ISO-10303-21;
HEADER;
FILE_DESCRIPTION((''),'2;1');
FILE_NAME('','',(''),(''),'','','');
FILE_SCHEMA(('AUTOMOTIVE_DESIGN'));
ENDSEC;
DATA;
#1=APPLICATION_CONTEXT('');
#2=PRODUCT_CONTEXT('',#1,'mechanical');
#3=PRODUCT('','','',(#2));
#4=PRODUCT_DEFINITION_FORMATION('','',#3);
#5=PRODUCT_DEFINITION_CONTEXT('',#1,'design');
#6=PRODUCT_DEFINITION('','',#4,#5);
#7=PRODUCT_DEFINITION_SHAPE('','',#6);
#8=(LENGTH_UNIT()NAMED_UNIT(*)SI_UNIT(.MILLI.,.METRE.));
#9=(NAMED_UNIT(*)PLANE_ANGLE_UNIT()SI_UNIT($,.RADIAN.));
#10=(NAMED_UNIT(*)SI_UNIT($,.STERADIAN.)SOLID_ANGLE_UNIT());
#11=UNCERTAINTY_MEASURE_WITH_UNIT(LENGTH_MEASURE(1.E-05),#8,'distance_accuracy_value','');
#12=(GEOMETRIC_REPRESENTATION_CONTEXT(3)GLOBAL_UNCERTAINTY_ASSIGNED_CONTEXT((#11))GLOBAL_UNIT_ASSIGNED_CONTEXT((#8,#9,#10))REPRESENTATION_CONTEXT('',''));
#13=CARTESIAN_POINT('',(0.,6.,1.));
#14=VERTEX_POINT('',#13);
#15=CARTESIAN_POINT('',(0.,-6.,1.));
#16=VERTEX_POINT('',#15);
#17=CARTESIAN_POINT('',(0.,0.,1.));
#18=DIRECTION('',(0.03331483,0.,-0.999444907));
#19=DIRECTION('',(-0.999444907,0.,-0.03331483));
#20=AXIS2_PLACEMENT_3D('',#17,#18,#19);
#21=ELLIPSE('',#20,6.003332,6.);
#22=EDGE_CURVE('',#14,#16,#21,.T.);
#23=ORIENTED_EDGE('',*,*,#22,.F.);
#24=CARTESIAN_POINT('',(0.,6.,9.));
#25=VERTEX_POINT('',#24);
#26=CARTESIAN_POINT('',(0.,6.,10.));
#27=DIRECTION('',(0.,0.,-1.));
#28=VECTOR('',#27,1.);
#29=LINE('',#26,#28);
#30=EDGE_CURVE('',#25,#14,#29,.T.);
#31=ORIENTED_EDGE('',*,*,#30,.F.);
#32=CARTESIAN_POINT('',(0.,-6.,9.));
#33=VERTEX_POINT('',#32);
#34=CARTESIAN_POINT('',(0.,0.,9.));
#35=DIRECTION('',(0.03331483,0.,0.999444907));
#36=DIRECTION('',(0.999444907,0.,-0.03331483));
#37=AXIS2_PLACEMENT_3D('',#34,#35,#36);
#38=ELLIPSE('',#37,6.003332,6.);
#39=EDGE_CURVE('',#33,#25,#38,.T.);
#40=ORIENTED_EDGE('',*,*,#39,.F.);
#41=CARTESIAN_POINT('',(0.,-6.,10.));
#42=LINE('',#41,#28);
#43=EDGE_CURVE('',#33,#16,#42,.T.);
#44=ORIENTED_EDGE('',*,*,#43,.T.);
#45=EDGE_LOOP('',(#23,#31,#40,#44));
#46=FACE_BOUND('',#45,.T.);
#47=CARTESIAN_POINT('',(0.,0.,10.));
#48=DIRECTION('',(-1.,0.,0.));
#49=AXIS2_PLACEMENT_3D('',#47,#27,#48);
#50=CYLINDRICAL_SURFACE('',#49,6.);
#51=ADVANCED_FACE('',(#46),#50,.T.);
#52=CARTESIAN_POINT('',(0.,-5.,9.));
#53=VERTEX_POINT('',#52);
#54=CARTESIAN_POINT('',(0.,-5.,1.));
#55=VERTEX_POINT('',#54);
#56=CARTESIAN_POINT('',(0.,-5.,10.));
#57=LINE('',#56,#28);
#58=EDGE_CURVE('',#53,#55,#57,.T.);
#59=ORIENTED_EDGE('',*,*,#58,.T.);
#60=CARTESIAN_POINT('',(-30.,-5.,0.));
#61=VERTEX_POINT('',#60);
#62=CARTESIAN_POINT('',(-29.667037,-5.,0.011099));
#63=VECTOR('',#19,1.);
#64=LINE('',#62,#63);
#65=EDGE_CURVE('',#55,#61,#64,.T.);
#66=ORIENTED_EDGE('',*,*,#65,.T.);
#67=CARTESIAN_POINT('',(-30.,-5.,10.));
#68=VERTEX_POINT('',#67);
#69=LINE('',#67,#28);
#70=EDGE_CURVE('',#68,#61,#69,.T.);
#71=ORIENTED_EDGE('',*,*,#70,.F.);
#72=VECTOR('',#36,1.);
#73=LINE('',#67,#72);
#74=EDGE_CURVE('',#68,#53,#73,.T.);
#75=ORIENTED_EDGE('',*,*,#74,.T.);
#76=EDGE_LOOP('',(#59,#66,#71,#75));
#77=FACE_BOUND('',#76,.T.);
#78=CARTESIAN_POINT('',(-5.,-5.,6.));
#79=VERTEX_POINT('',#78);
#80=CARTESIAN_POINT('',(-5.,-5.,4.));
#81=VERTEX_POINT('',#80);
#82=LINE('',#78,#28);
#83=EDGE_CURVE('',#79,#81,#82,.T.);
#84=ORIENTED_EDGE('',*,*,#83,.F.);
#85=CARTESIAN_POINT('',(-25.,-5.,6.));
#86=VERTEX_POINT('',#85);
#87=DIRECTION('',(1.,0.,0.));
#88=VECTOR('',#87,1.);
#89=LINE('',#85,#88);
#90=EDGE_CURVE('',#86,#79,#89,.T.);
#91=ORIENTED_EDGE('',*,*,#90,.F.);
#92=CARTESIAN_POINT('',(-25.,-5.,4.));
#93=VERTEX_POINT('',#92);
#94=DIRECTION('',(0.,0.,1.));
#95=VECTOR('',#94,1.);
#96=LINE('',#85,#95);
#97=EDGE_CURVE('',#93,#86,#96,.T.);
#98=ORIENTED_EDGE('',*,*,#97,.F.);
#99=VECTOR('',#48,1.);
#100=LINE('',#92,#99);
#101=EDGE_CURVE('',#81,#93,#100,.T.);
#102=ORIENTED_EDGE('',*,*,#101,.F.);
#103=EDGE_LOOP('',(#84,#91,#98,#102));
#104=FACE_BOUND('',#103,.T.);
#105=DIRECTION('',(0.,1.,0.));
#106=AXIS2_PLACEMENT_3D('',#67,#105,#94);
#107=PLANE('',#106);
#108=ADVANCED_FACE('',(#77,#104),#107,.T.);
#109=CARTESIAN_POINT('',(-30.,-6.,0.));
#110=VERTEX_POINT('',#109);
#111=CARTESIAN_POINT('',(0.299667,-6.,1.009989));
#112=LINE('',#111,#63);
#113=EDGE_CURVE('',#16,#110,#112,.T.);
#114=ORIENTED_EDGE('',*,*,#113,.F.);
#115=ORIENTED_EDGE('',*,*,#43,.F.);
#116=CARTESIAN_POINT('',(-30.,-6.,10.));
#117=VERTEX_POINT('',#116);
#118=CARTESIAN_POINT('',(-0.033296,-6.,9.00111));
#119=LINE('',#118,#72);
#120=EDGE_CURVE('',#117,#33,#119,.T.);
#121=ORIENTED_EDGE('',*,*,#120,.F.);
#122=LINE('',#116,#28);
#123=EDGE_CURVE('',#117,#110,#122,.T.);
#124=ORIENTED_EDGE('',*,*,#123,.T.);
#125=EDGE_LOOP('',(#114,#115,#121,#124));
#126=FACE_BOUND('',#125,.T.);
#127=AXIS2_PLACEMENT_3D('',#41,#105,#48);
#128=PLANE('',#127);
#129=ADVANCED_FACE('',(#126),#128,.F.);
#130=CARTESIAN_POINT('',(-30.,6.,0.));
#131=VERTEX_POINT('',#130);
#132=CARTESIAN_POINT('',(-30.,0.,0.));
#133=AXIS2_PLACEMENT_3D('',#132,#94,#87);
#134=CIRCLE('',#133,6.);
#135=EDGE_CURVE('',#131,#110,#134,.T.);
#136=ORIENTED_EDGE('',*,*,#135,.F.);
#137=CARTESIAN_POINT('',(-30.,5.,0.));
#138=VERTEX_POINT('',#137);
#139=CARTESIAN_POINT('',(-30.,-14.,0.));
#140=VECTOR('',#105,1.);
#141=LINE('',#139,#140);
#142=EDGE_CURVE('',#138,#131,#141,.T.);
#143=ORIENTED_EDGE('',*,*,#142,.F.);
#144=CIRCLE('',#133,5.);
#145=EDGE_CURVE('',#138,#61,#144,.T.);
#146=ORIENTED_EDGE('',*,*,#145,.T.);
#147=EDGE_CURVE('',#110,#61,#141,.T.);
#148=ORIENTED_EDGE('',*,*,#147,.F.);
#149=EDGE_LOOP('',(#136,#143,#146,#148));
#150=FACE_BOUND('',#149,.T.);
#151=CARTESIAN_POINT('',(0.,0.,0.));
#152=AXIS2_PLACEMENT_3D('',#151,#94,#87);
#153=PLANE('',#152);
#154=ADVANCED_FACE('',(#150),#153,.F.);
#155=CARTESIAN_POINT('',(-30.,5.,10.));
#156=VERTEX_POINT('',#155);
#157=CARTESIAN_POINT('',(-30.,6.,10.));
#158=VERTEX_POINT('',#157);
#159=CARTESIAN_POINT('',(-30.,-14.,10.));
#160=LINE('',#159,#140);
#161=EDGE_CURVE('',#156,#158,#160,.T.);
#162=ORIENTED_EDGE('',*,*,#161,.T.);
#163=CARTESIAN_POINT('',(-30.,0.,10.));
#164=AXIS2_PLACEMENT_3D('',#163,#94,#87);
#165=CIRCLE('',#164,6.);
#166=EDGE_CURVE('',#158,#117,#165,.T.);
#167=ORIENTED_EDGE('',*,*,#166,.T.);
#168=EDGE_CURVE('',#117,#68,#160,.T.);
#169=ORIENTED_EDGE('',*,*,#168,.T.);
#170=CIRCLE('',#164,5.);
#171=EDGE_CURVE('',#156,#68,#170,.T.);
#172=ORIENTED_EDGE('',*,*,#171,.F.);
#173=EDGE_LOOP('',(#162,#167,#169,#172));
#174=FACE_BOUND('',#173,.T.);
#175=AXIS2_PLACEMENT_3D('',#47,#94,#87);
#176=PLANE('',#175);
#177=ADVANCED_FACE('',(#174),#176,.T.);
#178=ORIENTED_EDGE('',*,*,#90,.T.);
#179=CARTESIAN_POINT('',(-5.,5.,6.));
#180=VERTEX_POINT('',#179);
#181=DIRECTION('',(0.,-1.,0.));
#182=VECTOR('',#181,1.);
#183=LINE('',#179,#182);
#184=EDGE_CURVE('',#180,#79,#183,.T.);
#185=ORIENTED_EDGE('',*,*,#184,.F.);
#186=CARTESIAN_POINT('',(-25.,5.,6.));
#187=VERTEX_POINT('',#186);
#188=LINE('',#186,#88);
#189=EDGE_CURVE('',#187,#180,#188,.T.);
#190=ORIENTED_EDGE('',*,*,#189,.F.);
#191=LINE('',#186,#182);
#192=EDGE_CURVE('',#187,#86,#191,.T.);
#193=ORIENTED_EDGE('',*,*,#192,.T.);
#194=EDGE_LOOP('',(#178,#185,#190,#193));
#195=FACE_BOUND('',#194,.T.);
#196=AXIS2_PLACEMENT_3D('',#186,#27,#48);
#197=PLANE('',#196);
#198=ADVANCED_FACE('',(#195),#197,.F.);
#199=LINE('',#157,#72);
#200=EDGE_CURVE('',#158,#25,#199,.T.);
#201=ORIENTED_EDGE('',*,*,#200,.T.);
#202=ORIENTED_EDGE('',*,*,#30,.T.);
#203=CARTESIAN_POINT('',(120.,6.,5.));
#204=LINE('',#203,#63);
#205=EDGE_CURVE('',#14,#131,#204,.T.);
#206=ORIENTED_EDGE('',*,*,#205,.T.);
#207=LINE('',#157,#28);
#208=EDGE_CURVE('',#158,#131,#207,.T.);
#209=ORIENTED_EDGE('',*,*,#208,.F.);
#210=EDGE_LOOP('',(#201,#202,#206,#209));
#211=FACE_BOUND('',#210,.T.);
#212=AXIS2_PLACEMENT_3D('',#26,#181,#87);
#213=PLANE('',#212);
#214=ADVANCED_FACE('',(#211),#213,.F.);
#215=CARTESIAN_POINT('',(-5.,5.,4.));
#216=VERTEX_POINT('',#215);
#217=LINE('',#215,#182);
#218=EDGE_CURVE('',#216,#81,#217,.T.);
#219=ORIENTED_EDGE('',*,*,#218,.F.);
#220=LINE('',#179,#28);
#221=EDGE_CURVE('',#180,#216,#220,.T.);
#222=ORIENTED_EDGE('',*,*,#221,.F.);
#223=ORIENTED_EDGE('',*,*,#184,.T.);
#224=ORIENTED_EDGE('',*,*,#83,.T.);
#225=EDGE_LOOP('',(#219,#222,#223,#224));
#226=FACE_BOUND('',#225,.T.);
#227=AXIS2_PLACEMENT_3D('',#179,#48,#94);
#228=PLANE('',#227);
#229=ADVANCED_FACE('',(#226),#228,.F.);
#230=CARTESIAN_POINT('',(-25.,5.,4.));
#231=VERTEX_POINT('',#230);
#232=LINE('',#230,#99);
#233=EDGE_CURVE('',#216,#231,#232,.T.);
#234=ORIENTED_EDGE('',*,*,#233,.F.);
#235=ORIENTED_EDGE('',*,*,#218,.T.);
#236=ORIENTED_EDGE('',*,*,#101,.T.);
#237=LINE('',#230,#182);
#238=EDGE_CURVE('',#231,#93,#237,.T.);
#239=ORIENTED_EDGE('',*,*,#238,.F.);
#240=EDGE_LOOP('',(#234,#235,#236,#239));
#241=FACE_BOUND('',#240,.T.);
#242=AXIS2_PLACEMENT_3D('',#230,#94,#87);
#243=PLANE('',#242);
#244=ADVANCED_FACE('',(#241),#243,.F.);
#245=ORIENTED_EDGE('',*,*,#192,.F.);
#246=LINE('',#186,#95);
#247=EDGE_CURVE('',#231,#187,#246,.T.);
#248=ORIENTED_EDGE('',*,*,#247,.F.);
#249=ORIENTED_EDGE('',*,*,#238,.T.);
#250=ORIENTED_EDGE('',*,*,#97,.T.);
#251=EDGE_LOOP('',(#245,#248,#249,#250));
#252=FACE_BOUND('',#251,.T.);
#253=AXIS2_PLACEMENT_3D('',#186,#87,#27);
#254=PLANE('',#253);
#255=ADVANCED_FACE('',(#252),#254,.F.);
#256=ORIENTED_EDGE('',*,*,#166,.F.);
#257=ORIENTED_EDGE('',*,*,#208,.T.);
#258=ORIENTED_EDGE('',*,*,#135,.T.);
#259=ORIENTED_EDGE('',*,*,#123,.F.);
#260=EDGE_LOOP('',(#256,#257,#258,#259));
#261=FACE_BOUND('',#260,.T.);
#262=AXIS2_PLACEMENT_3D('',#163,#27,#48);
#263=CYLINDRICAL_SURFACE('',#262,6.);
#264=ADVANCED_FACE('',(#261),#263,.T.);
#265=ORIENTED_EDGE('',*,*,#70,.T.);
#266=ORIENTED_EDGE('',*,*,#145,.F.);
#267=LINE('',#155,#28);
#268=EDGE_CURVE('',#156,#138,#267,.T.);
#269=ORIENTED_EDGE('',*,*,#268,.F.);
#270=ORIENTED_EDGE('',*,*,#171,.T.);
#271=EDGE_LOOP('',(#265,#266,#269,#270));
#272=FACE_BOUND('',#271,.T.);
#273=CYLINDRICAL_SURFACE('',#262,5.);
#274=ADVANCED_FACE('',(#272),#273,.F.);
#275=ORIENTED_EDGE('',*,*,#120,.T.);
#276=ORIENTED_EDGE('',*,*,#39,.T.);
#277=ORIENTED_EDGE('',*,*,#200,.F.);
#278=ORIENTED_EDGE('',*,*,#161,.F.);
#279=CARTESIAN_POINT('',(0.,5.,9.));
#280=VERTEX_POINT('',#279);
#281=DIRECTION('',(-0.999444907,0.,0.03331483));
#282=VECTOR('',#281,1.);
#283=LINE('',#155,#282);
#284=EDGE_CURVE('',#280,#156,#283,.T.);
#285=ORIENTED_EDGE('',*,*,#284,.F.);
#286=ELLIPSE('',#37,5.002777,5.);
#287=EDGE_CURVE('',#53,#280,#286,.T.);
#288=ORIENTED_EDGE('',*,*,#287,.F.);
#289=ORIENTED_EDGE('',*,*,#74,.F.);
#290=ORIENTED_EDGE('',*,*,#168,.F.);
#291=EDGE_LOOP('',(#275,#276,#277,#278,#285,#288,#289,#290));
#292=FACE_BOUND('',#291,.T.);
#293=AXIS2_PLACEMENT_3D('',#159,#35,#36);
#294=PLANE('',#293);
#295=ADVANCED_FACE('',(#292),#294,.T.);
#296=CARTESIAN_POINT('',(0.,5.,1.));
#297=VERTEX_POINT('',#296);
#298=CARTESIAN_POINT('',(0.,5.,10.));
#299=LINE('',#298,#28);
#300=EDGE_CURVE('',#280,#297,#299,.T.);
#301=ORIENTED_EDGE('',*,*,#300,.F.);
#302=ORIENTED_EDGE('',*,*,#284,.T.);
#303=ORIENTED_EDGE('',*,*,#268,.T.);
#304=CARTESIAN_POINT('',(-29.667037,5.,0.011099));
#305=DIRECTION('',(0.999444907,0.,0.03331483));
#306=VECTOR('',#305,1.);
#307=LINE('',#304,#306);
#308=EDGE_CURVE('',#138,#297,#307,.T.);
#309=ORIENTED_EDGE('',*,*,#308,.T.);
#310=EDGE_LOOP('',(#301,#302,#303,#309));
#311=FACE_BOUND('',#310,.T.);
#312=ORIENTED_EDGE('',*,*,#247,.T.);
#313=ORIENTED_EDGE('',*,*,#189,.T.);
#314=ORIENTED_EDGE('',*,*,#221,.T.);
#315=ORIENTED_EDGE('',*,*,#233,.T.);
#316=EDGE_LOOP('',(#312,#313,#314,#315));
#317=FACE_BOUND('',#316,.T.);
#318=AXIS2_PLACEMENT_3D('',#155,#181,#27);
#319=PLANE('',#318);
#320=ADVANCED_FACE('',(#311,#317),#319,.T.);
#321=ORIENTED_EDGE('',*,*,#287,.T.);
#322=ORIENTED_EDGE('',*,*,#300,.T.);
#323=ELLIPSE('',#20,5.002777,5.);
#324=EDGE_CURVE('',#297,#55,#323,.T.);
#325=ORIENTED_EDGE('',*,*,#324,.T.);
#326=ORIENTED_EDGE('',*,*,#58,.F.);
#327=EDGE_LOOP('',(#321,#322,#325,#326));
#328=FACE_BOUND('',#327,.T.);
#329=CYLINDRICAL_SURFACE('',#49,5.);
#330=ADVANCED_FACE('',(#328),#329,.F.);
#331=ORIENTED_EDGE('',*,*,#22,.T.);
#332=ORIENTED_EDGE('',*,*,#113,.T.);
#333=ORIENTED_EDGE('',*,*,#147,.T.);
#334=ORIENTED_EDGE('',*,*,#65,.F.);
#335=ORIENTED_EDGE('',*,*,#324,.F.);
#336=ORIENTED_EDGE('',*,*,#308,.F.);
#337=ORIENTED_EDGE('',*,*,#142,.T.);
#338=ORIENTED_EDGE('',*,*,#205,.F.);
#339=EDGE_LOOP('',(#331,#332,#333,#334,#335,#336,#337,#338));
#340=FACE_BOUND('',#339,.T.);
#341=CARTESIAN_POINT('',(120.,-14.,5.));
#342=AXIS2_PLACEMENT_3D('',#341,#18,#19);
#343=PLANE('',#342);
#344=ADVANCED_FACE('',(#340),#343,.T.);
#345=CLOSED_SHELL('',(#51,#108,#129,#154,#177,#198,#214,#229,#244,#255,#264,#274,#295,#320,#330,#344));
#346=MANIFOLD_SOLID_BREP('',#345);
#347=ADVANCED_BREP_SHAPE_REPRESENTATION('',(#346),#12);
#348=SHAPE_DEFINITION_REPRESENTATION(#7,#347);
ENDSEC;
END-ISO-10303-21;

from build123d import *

# Parameters (mm, degrees)
BOSS_EXTRUDE1_DEPTH = 10
SKETCH2_W           = 20
SKETCH2_H           = 2
BOSS_EXTRUDE2_DEPTH = 10
CUT_EXTRUDE1_START  = -12
CUT_EXTRUDE1_DEPTH  = 12


# Read off the part's stored shape, not the designer's step: Cut-Extrude1
with BuildPart() as part:
    # Sketch1 → Boss-Extrude1 (new body)
    with BuildSketch(Plane.XY):
        with BuildLine():
            Line((0, -6), (-30, -6))
            ThreePointArc((-30, -6), (-36, 0), (-30, 6))
            Line((-30, 6), (0, 6))
            ThreePointArc((0, 6), (6, 0), (0, -6))
        make_face()
        with BuildLine():
            Line((-30, 5), (0, 5))
            ThreePointArc((0, 5), (5, 0), (0, -5))
            Line((0, -5), (-30, -5))
            ThreePointArc((-30, -5), (-35, 0), (-30, 5))
        make_face(mode=Mode.SUBTRACT)
    extrude(amount=BOSS_EXTRUDE1_DEPTH)

    # Sketch2 → Boss-Extrude2 (add)
    with BuildSketch(Plane(origin=(0, -5, 0), x_dir=(1, 0, 0), z_dir=(0, 1, 0))):
        with Locations((-15, -5)):
            Rectangle(SKETCH2_W, SKETCH2_H)
    extrude(amount=BOSS_EXTRUDE2_DEPTH)

    # Cut-Extrude1 outline → Cut-Extrude1 (cut)
    with BuildSketch(Plane(origin=(0, 6, 0), x_dir=(1, 0, 0), z_dir=(0, 1, 0)).offset(CUT_EXTRUDE1_START)):
        Polygon((6, -8.8), (-30, -10), (7, -10), (7, -8.766666667), align=None)
        Polygon((6, -1.2), (7, -1.233333333), (7, 0), (-30, 0), align=None)
    extrude(amount=CUT_EXTRUDE1_DEPTH, mode=Mode.SUBTRACT)


solid = part.part
